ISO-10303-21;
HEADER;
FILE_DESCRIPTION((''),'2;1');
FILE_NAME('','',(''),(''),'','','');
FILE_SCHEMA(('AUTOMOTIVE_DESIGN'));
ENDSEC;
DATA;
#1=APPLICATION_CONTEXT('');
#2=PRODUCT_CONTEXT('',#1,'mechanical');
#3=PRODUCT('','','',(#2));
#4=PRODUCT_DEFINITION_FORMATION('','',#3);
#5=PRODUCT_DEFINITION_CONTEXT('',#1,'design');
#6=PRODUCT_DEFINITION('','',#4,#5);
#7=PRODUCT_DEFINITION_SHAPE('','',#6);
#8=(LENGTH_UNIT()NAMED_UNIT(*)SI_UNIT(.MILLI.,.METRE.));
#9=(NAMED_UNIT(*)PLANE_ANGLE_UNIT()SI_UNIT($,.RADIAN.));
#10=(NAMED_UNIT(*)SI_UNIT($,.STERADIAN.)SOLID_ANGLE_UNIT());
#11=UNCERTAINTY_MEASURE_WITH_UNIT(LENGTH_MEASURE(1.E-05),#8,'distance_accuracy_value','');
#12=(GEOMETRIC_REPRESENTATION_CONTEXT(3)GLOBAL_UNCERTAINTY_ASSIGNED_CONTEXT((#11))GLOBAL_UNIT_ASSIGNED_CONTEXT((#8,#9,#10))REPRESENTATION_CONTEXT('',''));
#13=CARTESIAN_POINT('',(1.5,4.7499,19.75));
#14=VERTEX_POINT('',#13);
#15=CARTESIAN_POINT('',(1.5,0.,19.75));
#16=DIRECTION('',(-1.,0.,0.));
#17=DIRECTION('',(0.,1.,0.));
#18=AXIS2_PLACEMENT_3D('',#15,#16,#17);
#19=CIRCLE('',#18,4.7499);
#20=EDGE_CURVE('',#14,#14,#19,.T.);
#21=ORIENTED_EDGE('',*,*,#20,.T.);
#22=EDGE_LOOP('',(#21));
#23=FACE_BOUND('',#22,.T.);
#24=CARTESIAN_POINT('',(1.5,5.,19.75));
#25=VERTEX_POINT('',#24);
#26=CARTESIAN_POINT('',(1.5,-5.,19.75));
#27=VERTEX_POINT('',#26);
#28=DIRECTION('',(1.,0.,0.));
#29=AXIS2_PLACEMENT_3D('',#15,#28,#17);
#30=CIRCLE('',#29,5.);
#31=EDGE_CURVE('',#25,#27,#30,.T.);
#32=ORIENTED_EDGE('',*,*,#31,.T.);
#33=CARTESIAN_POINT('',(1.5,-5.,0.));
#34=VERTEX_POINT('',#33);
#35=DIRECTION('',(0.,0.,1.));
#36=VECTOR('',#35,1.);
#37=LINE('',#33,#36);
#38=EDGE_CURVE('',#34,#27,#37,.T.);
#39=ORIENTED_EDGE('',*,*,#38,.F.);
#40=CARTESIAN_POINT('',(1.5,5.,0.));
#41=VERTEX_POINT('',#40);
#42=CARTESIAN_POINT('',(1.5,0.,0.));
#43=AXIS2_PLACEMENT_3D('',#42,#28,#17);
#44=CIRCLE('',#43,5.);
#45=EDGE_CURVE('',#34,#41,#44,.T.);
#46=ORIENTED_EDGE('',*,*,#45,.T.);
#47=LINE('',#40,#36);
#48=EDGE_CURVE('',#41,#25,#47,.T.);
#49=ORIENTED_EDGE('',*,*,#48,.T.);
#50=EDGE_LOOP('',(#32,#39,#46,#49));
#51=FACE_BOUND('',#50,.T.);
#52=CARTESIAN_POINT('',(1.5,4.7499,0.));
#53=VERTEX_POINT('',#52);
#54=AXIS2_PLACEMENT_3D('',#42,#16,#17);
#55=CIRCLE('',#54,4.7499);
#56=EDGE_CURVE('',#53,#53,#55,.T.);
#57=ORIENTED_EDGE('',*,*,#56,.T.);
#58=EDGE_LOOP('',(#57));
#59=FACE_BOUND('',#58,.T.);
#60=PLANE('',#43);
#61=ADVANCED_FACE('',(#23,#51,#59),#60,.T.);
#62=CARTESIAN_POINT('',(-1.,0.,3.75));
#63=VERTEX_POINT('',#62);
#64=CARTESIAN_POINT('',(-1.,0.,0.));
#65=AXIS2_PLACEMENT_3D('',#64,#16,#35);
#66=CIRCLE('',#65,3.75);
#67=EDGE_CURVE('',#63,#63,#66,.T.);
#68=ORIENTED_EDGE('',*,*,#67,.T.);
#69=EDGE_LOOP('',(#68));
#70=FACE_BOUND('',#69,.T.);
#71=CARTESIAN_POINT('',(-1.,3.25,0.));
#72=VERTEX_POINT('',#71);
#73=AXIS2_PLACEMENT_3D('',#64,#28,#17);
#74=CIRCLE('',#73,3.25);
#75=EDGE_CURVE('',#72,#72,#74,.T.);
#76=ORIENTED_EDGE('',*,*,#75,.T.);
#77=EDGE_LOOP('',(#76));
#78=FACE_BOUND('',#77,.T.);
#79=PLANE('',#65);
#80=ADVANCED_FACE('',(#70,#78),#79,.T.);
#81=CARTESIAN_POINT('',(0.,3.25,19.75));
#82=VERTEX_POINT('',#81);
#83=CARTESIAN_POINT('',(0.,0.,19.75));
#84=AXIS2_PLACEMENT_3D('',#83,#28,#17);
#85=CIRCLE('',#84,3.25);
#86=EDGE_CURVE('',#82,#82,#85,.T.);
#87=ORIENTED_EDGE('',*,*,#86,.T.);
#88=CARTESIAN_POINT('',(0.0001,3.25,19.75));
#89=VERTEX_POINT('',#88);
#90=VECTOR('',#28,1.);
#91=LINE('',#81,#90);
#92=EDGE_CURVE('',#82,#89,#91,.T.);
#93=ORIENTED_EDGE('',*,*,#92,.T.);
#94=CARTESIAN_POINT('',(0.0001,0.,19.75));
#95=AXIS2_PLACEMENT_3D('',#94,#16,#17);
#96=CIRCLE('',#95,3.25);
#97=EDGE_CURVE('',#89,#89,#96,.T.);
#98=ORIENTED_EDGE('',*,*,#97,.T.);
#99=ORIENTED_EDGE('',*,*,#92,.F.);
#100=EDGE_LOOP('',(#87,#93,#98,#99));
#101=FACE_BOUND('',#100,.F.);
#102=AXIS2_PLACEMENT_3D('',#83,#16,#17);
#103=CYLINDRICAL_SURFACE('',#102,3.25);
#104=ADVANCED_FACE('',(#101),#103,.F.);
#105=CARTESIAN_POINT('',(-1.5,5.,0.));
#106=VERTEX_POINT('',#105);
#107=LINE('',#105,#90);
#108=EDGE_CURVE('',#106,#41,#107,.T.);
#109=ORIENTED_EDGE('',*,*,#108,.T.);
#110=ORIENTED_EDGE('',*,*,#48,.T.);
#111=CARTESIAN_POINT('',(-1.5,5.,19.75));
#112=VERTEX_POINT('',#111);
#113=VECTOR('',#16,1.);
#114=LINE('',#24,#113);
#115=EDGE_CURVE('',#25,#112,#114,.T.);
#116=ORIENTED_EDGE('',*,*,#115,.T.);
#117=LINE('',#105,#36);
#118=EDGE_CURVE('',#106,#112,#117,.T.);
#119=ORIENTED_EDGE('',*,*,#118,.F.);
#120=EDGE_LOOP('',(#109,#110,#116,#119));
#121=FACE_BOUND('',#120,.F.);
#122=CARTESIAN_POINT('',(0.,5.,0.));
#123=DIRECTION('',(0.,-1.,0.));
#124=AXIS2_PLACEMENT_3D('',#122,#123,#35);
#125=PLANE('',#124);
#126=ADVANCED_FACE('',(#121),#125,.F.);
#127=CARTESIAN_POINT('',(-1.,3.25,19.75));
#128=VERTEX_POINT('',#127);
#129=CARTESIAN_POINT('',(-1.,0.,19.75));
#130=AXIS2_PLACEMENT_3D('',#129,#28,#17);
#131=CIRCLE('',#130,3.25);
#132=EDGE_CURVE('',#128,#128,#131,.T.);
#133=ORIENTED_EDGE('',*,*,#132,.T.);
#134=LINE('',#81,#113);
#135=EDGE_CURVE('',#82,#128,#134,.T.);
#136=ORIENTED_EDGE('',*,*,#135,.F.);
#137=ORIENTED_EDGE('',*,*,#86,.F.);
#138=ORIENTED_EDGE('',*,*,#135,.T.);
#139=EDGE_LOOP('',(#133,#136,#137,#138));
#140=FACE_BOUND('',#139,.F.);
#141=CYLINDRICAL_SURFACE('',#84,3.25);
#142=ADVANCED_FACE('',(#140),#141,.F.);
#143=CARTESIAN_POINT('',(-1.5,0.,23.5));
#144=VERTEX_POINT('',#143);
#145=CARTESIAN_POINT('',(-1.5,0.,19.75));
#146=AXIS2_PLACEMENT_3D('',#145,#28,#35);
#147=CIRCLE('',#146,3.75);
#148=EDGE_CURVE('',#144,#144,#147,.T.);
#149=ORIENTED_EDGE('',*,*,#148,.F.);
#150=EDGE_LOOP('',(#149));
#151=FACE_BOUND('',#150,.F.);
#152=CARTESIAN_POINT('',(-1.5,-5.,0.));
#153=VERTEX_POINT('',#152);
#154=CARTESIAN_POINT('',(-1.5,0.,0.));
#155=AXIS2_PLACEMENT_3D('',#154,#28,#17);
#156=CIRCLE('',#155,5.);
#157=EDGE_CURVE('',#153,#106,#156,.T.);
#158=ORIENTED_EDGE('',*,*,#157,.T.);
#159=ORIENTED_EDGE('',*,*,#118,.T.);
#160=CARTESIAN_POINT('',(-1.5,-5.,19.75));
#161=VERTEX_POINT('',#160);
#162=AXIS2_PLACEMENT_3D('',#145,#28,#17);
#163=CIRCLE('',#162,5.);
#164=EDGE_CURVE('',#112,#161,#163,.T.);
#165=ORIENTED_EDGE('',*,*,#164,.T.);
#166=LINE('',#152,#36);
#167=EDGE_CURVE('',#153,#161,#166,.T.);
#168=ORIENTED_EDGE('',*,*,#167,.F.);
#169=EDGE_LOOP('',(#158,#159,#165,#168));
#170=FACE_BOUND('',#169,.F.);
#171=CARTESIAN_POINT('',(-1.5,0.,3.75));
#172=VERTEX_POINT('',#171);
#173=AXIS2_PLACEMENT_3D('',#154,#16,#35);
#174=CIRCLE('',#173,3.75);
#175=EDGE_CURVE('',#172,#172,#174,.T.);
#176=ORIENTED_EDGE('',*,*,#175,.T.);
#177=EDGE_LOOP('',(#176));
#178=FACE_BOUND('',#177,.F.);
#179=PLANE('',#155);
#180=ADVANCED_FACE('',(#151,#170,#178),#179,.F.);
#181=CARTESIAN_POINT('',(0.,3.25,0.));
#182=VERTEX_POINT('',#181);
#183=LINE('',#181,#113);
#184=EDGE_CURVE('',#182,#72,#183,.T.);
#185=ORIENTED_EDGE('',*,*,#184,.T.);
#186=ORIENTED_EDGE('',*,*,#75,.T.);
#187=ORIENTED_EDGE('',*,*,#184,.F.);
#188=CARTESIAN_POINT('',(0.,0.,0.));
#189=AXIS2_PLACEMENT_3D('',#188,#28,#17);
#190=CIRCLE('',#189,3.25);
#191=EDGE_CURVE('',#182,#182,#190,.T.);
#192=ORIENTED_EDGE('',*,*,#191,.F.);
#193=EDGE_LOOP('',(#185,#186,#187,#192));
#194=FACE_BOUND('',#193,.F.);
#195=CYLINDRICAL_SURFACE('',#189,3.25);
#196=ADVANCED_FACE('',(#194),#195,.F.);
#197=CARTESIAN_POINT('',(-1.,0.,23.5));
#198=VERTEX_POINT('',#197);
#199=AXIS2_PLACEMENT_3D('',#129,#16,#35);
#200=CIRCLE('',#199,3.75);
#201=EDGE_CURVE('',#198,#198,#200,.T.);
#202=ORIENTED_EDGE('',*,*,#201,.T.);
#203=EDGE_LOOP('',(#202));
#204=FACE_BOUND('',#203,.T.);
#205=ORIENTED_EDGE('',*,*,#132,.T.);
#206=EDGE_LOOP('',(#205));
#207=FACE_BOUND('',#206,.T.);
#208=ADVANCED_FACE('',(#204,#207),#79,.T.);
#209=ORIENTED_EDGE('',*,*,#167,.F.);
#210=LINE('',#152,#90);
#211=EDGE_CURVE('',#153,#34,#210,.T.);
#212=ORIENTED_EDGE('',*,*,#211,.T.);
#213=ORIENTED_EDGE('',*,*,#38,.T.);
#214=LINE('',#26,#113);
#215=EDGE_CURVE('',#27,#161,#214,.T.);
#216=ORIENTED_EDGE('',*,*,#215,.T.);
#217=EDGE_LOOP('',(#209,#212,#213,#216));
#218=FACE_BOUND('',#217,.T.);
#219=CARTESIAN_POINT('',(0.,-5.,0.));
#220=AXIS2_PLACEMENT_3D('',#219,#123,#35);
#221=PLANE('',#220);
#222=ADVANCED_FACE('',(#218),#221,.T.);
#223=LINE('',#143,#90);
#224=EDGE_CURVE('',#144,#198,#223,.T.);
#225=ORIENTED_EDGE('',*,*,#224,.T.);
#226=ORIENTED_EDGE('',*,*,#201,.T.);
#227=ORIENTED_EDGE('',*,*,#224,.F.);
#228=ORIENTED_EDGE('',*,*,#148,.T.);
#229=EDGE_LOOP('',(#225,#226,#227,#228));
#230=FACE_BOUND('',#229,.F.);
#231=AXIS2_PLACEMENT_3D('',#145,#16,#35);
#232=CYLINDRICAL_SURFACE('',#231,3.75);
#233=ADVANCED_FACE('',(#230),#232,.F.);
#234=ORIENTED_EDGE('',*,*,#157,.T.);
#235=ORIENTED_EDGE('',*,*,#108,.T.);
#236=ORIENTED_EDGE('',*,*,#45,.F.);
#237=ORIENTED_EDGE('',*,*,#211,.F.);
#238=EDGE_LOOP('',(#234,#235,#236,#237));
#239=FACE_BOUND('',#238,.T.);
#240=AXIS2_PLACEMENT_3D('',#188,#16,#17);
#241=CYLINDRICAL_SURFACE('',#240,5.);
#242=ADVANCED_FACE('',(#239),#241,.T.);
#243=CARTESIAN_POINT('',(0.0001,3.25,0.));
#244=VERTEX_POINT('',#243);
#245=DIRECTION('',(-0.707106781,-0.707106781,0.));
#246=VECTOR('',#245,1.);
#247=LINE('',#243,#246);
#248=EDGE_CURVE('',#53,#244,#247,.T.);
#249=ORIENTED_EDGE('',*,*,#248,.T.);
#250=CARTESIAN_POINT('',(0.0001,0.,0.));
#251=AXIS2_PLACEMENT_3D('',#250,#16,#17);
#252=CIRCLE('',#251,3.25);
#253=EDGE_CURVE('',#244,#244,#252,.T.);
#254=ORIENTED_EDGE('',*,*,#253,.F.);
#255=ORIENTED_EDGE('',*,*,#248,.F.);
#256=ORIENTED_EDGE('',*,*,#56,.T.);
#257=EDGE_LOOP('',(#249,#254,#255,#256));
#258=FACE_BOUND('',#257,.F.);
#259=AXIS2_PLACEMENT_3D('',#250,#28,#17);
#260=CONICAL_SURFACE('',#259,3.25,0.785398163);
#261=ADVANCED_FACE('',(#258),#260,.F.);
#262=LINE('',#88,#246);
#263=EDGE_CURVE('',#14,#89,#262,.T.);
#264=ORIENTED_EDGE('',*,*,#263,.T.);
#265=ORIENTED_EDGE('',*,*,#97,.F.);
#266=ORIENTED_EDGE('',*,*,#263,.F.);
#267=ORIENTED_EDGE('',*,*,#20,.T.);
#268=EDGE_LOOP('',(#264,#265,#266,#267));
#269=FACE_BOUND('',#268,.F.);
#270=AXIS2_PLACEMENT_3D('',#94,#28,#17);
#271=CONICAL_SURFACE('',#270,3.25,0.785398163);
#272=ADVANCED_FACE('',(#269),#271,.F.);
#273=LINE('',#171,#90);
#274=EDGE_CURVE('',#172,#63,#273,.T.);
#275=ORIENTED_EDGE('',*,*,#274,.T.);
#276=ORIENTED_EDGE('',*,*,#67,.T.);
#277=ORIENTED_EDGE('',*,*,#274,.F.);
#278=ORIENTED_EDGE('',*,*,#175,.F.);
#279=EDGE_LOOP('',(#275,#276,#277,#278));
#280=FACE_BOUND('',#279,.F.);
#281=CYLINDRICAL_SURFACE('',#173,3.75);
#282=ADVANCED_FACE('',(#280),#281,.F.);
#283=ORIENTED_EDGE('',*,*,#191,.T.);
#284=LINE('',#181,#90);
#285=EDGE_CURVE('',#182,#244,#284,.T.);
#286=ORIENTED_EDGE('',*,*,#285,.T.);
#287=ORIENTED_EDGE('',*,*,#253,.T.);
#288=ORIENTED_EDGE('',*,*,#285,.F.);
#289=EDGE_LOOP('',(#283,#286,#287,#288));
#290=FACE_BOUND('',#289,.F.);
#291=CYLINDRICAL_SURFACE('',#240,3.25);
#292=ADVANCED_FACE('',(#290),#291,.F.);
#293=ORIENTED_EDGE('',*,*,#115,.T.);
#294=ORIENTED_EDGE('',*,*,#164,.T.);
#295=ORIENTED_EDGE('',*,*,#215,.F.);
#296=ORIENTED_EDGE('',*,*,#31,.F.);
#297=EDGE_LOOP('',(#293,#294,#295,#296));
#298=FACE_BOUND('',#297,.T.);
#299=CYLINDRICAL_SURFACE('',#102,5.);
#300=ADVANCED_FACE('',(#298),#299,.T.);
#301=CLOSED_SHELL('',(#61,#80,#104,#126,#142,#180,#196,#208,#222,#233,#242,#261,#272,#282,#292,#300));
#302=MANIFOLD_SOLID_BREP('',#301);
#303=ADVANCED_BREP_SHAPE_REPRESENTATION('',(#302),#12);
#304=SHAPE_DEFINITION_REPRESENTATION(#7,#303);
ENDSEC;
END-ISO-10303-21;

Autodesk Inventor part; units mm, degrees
ref_plane "YZ Plane" through (0, 0, 0) normal (1, 0, 0) x (0, 1, 0)
ref_plane "XZ Plane" through (0, 0, 0) normal (0, 1, 0) x (-1, 0, 0)
ref_plane "XY Plane" through (0, 0, 0) normal (0, 0, 1) x (1, 0, 0)
sketch "Boceto1" plane through (0, 0, 0) normal (1, 0, 0) x (0, 1, 0)
  line L0 (0, 0) -> (0, 19.75)
  circle A0 centre (0, 19.75) radius 5
  circle A1 centre (0, 0) radius 5
  line L1 (5, 0) -> (5, 19.75)
  line L2 (-5, 0) -> (-5, 19.75)
  circle A2 centre (0, 19.75) radius 3.25
  circle A3 centre (0, 0) radius 3.25
  dimension "d0" = 19.75
  dimension "d1" = 10
  dimension "d2" = 10
  dimension "d5" = 6.5
  dimension "d6" = 6.5
extrude "Extrusión1" add sketch "Boceto1" along normal mid plane 3
sketch "Boceto2" plane through (-1.5, 0, 0) normal (-1, 0, 0) x (0, 0, 1)
  circle A0 centre (0, 0) radius 3.75
  line L0 (0, 0) -> (19.75, 0)
  circle A1 centre (19.75, 0) radius 3.75
  dimension "d7" = 7.5
  dimension "d8" = 19.75
  dimension "d9" = 7.5
extrude "Extrusión2" cut sketch "Boceto2" against normal blind 0.5
chamfer "Chaflán1" distance 1.5 angle 45 2 edges at (1.5, -3.25, 19.75) (1.5, -3.25, 0)
equation "\"d0\" = m2_r3"
equation "\"d1\" = width_r3"
equation "\"d2\" = width_r3"
equation "\"d5\" = sj_diam_shaft + 0.5 * offset"
equation "\"d6\" = sj_diam_shaft + 0.5 * offset"
equation "\"d3\" = t_thikness"
equation "\"d7\" = sj_head_D + 0.5 * offset"
equation "\"d8\" = m2_r3"
equation "\"d9\" = sj_head_D + 0.5 * offset"
equation "\"d10\" = 0.5 * offset"
equation "\"offset\" = 1"
equation "\"m2_r3\" = 19.75"
equation "\"width_r3\" = 10"
equation "\"t_thikness\" = 3"
equation "\"sj_diam_shaft\" = 6"
equation "\"sj_head_D\" = 7"
equation "\"thikness\" = 2"
equation "\"r1\" = 5.55"
equation "\"r2o\" = 59.75"
equation "\"delta_y\" = 6"
equation "\"wire_d\" = 1"
equation "\"width_ang_spring\" = 5"
equation "\"spring_int_diam\" = 8.5"
equation "\"spring_ext_diam\" = 10.5"
equation "\"r3\" = 8.25"
equation "\"r3R\" = 4.75"
equation "\"r3T\" = 6.74537"
equation "\"alpha\" = 54.847297deg"
equation "\"alpha2\" = 270deg"
equation "\"theta3_recogido\" = 305.152703deg"
equation "\"delta_theta_3\" = 45deg"
equation "\"joint_width\" = 12"
equation "\"joint_radius\" = 7.75"
equation "\"shaft_width\" = 15"
equation "\"shaft_joint_diameter\" = 7.75"
equation "\"separation_space\" = 0.5"
equation "\"height_finger\" = 42"
equation "\"cell_screw_head_diameter\" = 4"
equation "\"cell_screw_diameter\" = 2"
equation "\"cell_space\" = 2"
equation "\"cell_width\" = 6"
equation "\"cell_theta_position\" = 60deg"
equation "\"cell_thikness\" = 1"
equation "\"cell_lenght\" = 37"
equation "\"cell_z_space\" = 5"
equation "\"wire_D\" = 2.3"
equation "\"width_link\" = 8"
equation "\"Dt\" = 1.05949"
equation "\"Djoint_shaft\" = 2.3"
equation "\"shaft_x\" = 1.45"
equation "\"shaft_y\" = 6.45"
equation "\"lenght_body_link\" = 186.05"
equation "\"lenght_bar_support\" = 201.65"
equation "\"wire_spring_d\" = 1"
equation "\"spring_int_d\" = 6"
equation "\"spring_lenght\" = 28"
equation "\"trigger_offset\" = 2"
equation "\"m2_theta2o\" = 107deg"
equation "\"m2_r2\" = 28"
equation "\"e\" = 9"
equation "\"So\" = 17"
equation "\"m2_theta3o\" = -30deg"
equation "\"m2_delta_theta1\" = 15deg"
equation "\"m2_theta3f\" = -60deg"
equation "\"trigger_thumb_lenght\" = 6"
equation "\"width_r12\" = 8"
equation "\"m2_r1\" = 25.2"
equation "\"r3_thikness\" = 3.5"
equation "\"tg_width\" = 4"
equation "\"pivot_screw_d\" = 4"
equation "\"pivot_diameter\" = 7"
equation "\"sj_groove\" = 2"
equation "\"sj_groove_deep\" = 7"
equation "\"sj_head_d\" = 4.7464"
equation "\"sj_head_height\" = 5"
equation "\"sf_lenght\" = 9.5"
equation "\"sf_base\" = 3"
equation "\"sf_head_height\" = 3"
equation "\"sf_head_width\" = 4.5"
equation "\"sf_head_offset\" = 0.25"
equation "\"sf_head_grip_width\" = 2"
equation "\"sf_head_angle\" = 45deg"
equation "\"sf_thikness\" = 5"
equation "\"screw_Dhead\" = 8"
equation "\"screw_d\" = 4"
equation "\"screw_lenght\" = 12"
equation "\"screwJ_base_D\" = 9"
equation "\"screwJ_top_D\" = 13"
equation "\"gj_D\" = 6"
equation "\"gj_d\" = 4"
equation "\"gj_out_section\" = 6"
equation "\"ext_width_slider\" = 3.5"
equation "\"sfbox_tip_width\" = 2.5"
equation "\"slim_width_slider\" = 1.5"
equation "\"agarradera_width\" = 4"
equation "\"int_width_slider\" = 2"
equation "\"agarradera_position\" = 82.13077"
equation "\"sfbox_theta1\" = 60deg"
equation "\"sfbox_theta2\" = 45deg"
equation "\"agarradera_theta\" = 60deg"
equation "\"sfbox_width\" = 1.5"
equation "\"box_fat_slider_lenght\" = 67"
equation "\"fat_width_slider\" = 2"
equation "\"box_in_width\" = 72"
equation "\"flex_separation_theta\" = 60deg"
equation "\"sf_flex_separation\" = 38.66667"
equation "\"thikness_box\" = 1.5"
equation "\"box_slim_slider_lenght\" = 116"
equation "\"box_in_deep\" = 77"
equation "\"box_in_height\" = 35"
properties part number "link3" material "Plástico PPS"
